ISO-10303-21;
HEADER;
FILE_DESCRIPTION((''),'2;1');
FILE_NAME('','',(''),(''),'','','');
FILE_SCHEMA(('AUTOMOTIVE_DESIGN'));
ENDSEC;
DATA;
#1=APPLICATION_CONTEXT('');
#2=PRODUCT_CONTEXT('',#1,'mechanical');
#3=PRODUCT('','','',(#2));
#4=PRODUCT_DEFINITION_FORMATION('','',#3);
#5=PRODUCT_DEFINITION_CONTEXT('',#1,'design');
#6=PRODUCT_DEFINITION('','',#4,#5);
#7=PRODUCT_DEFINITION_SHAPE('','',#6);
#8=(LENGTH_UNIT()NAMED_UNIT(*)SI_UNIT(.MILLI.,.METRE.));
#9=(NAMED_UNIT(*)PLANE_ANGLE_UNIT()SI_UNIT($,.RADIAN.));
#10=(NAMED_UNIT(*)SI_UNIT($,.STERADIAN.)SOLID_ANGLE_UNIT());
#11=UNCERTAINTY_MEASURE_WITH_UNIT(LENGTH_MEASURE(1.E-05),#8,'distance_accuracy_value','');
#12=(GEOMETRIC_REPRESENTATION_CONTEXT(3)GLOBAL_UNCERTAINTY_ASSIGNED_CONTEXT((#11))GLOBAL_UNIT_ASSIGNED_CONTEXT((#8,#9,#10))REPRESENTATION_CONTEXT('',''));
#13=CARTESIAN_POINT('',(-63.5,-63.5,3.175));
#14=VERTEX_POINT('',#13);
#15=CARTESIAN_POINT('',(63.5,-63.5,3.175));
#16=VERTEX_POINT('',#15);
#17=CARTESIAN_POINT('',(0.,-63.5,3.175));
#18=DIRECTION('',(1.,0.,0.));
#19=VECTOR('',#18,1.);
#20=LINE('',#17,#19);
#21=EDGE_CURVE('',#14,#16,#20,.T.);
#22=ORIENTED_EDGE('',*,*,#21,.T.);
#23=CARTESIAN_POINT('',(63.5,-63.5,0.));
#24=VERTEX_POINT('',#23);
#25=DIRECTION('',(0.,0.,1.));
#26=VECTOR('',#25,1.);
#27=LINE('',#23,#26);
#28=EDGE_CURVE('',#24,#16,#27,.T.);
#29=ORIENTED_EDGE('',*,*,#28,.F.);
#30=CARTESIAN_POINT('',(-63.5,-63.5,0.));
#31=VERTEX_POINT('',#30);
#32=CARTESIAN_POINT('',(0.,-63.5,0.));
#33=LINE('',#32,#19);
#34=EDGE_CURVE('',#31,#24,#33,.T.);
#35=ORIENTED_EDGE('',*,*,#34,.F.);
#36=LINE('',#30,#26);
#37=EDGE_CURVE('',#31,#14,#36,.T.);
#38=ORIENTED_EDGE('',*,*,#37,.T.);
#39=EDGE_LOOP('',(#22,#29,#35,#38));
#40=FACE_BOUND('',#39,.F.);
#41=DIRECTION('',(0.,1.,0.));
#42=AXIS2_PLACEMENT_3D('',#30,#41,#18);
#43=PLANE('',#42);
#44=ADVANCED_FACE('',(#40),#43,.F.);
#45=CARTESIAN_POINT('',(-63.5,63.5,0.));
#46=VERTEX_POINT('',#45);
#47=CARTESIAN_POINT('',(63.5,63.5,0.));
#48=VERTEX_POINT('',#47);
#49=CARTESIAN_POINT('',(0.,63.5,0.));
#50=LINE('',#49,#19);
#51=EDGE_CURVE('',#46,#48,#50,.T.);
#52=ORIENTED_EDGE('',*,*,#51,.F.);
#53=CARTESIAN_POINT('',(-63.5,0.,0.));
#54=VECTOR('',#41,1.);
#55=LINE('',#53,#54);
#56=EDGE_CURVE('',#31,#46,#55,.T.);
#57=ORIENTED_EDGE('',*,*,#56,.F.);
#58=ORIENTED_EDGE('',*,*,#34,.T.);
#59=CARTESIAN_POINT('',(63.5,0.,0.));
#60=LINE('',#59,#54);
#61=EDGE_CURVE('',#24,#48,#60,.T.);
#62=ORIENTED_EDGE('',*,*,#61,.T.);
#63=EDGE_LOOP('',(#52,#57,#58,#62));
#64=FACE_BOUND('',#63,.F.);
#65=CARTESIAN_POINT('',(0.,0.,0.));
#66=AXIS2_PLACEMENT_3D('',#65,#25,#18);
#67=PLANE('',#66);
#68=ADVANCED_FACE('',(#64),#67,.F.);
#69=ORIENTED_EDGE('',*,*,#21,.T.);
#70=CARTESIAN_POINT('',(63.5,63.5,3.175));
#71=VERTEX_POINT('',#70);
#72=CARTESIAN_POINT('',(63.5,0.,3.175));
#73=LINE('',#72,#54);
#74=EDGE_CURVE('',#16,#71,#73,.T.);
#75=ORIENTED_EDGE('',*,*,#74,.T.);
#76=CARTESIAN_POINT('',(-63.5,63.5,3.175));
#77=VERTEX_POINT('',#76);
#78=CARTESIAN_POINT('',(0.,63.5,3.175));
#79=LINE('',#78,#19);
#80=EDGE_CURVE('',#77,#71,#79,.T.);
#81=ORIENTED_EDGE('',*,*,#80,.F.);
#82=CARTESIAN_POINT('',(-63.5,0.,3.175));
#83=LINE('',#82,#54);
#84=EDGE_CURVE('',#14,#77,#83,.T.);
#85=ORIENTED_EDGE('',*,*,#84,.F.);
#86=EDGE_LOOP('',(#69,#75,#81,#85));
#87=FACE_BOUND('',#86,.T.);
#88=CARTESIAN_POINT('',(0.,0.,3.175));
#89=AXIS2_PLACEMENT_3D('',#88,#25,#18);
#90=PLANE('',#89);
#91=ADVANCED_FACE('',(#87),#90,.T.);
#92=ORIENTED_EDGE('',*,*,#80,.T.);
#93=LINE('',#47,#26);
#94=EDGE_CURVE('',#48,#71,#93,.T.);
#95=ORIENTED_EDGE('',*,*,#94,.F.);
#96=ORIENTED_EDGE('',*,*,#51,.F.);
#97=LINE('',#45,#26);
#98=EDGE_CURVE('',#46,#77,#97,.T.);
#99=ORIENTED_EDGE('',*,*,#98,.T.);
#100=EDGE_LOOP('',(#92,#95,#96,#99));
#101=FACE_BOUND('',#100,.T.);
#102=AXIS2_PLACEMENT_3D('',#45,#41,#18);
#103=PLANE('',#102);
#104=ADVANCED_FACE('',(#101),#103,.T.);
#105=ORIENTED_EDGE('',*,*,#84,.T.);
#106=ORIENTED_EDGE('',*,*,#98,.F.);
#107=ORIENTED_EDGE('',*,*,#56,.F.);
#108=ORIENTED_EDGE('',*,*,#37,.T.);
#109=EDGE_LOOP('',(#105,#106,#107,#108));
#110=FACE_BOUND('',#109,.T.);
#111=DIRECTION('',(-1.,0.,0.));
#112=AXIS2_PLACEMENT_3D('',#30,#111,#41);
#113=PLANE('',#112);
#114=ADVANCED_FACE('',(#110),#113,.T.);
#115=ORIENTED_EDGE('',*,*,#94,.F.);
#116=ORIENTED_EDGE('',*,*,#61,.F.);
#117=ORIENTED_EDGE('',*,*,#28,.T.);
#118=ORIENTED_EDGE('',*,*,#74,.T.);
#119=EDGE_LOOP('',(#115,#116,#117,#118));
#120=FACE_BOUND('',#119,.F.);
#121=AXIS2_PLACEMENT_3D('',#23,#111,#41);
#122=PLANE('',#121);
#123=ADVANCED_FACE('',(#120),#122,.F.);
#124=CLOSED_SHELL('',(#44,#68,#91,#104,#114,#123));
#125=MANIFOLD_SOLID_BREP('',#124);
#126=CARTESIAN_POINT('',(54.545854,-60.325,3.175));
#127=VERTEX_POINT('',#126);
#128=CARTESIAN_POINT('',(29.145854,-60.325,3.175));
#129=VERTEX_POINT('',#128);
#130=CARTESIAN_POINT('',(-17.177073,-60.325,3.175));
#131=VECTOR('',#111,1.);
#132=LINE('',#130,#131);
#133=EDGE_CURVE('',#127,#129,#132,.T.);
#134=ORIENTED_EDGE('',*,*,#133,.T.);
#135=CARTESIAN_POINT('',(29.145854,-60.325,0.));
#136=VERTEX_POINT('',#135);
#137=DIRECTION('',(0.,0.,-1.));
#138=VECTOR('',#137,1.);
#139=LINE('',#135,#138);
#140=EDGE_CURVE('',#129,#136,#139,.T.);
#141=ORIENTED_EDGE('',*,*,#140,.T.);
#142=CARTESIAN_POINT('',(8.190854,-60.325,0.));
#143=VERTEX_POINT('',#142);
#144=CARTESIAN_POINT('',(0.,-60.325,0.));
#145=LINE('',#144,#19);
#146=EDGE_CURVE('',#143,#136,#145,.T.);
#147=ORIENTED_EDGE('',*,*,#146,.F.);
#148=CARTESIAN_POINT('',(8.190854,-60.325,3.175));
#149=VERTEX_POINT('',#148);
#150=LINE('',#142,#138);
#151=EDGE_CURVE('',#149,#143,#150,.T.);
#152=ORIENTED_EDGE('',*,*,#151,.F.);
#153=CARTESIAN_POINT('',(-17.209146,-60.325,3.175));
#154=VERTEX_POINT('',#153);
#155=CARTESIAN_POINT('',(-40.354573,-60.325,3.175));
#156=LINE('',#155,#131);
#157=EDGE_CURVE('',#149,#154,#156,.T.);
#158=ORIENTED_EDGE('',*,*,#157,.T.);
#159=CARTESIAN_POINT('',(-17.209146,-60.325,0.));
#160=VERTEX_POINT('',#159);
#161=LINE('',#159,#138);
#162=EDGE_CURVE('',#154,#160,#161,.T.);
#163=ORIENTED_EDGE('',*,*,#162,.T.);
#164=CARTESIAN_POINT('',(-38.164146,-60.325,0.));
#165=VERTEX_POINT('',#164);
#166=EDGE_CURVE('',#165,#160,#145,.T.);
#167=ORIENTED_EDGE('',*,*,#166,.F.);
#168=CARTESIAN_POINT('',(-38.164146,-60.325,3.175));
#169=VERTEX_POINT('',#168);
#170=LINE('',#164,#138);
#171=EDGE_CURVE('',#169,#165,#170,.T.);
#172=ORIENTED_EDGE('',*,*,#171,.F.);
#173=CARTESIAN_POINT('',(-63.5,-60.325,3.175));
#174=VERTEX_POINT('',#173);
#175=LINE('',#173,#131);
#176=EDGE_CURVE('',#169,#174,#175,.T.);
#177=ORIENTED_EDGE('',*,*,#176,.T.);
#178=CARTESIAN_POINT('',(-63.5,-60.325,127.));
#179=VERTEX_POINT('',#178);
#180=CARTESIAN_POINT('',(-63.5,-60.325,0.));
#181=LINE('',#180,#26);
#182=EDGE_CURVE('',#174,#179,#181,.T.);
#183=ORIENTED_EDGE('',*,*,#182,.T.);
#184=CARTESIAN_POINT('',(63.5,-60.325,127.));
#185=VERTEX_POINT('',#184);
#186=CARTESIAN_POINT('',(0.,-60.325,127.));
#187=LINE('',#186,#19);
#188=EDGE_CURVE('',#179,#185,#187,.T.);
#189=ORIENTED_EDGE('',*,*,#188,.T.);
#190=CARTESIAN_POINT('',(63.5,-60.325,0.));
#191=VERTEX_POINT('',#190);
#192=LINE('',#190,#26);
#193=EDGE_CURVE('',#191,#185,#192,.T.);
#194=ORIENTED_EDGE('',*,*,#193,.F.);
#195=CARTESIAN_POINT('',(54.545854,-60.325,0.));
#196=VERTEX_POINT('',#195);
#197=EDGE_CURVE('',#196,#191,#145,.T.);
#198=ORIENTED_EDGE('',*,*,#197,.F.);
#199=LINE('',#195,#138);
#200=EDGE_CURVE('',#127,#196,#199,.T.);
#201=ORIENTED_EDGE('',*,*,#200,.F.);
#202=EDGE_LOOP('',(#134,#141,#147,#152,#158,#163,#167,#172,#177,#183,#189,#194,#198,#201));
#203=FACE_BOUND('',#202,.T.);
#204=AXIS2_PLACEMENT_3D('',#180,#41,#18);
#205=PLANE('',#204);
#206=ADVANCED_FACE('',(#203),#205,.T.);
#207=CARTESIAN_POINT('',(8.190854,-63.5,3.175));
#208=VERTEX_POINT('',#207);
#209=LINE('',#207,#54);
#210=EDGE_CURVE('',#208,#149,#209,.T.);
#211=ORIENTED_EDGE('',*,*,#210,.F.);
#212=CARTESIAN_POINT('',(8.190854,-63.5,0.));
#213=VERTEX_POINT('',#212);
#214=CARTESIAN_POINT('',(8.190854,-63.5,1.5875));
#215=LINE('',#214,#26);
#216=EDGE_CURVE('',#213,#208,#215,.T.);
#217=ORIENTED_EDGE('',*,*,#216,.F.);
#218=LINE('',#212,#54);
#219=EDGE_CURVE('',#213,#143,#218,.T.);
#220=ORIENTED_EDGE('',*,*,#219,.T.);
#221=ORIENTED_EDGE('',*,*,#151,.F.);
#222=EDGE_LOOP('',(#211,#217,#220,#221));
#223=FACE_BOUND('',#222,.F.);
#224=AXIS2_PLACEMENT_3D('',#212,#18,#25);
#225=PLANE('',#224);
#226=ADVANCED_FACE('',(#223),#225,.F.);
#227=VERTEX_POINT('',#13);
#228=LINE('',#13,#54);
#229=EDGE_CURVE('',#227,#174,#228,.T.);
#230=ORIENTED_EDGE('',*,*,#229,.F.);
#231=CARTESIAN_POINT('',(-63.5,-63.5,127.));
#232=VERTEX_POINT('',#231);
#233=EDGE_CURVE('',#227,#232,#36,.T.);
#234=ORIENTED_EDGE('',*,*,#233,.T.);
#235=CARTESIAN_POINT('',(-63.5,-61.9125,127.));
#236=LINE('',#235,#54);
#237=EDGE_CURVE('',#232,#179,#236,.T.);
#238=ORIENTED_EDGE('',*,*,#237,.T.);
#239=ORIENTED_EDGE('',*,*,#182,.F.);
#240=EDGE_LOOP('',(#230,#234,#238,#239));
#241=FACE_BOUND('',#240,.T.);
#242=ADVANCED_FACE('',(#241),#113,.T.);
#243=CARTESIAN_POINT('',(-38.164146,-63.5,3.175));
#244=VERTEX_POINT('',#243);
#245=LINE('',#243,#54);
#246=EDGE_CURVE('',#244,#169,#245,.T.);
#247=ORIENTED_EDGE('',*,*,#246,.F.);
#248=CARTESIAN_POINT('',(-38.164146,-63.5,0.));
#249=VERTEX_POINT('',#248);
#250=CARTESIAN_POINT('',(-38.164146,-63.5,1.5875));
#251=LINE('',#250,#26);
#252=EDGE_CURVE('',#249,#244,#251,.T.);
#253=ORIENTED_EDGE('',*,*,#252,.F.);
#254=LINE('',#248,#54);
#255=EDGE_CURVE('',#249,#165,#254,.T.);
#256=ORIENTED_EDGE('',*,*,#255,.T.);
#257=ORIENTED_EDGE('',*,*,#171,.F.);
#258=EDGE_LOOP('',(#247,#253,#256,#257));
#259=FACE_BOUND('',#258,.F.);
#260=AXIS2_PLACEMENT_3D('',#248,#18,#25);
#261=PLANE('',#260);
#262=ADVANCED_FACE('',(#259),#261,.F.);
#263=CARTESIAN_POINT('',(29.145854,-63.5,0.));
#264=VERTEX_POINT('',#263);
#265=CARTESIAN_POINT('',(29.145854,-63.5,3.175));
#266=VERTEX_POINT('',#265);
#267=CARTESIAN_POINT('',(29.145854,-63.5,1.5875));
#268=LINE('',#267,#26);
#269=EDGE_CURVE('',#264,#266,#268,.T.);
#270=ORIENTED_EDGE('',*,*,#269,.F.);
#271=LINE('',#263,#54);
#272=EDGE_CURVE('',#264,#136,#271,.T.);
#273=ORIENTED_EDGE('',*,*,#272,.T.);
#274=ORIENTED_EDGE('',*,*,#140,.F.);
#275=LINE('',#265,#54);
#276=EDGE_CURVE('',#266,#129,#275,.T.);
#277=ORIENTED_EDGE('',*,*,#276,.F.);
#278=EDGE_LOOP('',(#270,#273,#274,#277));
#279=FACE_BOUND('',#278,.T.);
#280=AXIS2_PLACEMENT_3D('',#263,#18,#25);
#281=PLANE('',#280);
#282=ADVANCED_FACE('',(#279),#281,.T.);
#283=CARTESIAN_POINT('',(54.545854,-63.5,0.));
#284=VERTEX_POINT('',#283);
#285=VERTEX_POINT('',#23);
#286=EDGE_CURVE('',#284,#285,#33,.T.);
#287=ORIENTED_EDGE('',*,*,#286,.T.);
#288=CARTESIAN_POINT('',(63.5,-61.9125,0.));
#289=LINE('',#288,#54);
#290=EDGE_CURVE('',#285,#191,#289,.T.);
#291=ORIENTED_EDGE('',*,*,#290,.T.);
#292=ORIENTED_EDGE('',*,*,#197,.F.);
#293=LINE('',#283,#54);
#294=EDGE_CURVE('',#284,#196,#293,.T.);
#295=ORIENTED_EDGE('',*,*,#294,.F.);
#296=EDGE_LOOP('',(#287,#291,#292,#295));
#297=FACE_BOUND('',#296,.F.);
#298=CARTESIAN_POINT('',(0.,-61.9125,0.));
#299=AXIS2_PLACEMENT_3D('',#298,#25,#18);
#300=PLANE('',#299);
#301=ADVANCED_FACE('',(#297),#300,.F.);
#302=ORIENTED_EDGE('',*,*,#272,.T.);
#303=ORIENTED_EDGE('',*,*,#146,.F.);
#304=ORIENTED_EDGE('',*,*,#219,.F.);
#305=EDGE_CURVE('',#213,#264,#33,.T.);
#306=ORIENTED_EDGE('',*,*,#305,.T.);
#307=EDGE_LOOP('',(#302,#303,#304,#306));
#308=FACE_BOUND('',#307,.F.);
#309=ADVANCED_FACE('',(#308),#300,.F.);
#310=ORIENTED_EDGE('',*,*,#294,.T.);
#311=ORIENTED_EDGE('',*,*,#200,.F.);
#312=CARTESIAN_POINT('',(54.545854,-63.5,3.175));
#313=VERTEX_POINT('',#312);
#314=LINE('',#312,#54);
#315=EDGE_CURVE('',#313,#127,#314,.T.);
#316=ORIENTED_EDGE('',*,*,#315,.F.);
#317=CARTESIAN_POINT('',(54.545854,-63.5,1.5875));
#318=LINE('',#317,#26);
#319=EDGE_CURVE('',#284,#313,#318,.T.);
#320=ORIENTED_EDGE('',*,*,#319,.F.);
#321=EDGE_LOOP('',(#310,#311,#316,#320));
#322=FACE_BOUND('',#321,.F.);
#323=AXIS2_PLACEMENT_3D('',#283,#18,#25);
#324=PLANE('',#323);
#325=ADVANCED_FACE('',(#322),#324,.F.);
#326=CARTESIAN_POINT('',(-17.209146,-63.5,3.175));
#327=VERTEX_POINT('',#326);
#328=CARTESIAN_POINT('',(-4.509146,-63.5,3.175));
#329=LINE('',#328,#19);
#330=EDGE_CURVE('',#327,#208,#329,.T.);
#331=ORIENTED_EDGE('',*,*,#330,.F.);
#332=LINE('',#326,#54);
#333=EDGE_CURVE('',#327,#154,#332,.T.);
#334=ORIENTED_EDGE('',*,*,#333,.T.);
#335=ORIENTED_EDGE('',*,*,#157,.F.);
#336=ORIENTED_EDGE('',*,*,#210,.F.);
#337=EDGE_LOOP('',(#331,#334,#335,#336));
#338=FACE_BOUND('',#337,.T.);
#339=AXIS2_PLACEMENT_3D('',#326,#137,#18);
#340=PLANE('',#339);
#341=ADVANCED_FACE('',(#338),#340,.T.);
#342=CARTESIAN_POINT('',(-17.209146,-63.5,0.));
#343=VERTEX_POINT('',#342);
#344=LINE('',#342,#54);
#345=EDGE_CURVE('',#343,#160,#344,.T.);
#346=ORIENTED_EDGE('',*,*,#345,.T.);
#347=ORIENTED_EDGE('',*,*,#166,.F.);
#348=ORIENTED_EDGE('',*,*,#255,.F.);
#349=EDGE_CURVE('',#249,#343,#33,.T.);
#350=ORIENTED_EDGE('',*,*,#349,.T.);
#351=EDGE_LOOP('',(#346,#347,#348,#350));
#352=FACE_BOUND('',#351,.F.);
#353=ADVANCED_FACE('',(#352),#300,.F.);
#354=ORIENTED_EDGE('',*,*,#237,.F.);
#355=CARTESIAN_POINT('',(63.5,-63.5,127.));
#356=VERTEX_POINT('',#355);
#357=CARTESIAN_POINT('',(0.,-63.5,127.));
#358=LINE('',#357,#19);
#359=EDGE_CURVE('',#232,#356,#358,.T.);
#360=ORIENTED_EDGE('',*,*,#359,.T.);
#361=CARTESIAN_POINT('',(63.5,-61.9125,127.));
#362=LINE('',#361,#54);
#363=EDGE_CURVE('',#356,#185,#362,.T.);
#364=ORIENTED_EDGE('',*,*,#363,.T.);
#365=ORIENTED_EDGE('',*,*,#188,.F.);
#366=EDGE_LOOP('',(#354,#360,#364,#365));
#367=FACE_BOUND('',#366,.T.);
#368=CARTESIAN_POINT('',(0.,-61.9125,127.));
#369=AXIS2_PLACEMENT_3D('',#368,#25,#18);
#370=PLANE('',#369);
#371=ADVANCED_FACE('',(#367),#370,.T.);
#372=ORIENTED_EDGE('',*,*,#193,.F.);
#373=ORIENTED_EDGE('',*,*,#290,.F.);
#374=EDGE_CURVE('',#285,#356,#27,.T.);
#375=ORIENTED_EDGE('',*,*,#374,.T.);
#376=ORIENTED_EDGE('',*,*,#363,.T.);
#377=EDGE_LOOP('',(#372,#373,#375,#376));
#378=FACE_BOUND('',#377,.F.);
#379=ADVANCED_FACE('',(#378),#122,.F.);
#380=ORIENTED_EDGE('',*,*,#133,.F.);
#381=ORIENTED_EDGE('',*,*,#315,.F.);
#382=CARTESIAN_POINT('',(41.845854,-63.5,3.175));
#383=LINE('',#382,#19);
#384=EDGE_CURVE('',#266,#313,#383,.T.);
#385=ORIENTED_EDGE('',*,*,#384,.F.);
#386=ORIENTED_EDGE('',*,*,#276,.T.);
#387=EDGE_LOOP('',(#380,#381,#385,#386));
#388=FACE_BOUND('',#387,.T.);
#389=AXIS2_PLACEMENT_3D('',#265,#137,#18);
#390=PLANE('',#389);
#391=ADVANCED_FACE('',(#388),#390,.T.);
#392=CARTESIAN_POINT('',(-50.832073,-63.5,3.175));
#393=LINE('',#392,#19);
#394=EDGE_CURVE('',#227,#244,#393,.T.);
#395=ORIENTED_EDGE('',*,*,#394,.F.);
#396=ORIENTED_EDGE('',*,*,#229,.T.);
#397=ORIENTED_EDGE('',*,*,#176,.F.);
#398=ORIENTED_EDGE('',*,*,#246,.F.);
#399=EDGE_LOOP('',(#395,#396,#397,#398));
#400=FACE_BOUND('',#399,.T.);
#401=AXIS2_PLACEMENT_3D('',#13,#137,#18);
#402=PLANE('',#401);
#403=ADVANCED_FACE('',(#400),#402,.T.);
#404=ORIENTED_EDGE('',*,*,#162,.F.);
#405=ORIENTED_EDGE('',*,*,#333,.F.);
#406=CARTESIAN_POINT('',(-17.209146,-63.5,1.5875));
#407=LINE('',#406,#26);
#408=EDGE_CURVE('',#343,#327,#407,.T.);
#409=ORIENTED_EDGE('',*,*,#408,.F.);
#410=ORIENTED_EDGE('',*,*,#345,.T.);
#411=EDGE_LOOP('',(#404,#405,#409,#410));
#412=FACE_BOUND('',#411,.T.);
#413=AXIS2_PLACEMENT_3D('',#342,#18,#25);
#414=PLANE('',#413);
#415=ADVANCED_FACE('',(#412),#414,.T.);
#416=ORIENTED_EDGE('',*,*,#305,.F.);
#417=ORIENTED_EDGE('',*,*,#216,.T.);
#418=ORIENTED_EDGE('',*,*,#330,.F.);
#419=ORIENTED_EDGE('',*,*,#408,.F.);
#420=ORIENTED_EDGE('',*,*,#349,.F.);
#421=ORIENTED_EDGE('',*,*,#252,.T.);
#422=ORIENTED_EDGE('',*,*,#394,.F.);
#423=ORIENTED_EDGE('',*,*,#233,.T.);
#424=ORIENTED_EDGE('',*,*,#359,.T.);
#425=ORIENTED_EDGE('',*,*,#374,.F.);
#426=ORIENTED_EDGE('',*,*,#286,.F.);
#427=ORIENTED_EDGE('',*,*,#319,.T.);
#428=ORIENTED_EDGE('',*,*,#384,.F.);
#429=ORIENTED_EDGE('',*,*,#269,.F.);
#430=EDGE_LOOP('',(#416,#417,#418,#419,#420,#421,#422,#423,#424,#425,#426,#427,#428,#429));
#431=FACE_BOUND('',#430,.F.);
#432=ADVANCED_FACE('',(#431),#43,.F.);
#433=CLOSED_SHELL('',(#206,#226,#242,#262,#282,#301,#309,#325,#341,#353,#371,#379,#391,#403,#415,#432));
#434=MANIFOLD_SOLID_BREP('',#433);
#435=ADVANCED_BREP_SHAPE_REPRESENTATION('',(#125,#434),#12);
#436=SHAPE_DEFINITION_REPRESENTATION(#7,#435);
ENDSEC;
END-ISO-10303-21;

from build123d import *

# Parameters (mm, degrees)
F0_W     = 127
F0_H     = 127
F1_DEPTH = 3.175
F2_W     = 127
F2_H     = 3.175
F3_DEPTH = 127
F4_W     = 25.3358542953
F4_H     = 3.175
F4_W_2   = 25.4
F5_DEPTH = 25.4


with BuildPart() as f1:
    # F0 (on Top) → F1 (new body)
    with BuildSketch(Plane.XY):
        Rectangle(F0_W, F0_H)
    extrude(amount=F1_DEPTH)


with BuildPart() as f3:
    # F2 (on Top) → F3 (new body)
    with BuildSketch(Plane.XY):
        with Locations((0, -61.9125)):
            Rectangle(F2_W, F2_H)
    extrude(amount=F3_DEPTH)

    # F4 (on face) → F5 (cut)
    with BuildSketch(Plane.XZ.offset(63.5)):
        with Locations((-50.8320728524, 1.5875)):
            Rectangle(F4_W, F4_H)
        with Locations((-4.5091457047, 1.5875)):
            Rectangle(F4_W_2, F4_H)
        with Locations((41.8458542953, 1.5875)):
            Rectangle(F4_W_2, F4_H)
    extrude(amount=-F5_DEPTH, mode=Mode.SUBTRACT)


solid = Compound([f1.part, f3.part])
